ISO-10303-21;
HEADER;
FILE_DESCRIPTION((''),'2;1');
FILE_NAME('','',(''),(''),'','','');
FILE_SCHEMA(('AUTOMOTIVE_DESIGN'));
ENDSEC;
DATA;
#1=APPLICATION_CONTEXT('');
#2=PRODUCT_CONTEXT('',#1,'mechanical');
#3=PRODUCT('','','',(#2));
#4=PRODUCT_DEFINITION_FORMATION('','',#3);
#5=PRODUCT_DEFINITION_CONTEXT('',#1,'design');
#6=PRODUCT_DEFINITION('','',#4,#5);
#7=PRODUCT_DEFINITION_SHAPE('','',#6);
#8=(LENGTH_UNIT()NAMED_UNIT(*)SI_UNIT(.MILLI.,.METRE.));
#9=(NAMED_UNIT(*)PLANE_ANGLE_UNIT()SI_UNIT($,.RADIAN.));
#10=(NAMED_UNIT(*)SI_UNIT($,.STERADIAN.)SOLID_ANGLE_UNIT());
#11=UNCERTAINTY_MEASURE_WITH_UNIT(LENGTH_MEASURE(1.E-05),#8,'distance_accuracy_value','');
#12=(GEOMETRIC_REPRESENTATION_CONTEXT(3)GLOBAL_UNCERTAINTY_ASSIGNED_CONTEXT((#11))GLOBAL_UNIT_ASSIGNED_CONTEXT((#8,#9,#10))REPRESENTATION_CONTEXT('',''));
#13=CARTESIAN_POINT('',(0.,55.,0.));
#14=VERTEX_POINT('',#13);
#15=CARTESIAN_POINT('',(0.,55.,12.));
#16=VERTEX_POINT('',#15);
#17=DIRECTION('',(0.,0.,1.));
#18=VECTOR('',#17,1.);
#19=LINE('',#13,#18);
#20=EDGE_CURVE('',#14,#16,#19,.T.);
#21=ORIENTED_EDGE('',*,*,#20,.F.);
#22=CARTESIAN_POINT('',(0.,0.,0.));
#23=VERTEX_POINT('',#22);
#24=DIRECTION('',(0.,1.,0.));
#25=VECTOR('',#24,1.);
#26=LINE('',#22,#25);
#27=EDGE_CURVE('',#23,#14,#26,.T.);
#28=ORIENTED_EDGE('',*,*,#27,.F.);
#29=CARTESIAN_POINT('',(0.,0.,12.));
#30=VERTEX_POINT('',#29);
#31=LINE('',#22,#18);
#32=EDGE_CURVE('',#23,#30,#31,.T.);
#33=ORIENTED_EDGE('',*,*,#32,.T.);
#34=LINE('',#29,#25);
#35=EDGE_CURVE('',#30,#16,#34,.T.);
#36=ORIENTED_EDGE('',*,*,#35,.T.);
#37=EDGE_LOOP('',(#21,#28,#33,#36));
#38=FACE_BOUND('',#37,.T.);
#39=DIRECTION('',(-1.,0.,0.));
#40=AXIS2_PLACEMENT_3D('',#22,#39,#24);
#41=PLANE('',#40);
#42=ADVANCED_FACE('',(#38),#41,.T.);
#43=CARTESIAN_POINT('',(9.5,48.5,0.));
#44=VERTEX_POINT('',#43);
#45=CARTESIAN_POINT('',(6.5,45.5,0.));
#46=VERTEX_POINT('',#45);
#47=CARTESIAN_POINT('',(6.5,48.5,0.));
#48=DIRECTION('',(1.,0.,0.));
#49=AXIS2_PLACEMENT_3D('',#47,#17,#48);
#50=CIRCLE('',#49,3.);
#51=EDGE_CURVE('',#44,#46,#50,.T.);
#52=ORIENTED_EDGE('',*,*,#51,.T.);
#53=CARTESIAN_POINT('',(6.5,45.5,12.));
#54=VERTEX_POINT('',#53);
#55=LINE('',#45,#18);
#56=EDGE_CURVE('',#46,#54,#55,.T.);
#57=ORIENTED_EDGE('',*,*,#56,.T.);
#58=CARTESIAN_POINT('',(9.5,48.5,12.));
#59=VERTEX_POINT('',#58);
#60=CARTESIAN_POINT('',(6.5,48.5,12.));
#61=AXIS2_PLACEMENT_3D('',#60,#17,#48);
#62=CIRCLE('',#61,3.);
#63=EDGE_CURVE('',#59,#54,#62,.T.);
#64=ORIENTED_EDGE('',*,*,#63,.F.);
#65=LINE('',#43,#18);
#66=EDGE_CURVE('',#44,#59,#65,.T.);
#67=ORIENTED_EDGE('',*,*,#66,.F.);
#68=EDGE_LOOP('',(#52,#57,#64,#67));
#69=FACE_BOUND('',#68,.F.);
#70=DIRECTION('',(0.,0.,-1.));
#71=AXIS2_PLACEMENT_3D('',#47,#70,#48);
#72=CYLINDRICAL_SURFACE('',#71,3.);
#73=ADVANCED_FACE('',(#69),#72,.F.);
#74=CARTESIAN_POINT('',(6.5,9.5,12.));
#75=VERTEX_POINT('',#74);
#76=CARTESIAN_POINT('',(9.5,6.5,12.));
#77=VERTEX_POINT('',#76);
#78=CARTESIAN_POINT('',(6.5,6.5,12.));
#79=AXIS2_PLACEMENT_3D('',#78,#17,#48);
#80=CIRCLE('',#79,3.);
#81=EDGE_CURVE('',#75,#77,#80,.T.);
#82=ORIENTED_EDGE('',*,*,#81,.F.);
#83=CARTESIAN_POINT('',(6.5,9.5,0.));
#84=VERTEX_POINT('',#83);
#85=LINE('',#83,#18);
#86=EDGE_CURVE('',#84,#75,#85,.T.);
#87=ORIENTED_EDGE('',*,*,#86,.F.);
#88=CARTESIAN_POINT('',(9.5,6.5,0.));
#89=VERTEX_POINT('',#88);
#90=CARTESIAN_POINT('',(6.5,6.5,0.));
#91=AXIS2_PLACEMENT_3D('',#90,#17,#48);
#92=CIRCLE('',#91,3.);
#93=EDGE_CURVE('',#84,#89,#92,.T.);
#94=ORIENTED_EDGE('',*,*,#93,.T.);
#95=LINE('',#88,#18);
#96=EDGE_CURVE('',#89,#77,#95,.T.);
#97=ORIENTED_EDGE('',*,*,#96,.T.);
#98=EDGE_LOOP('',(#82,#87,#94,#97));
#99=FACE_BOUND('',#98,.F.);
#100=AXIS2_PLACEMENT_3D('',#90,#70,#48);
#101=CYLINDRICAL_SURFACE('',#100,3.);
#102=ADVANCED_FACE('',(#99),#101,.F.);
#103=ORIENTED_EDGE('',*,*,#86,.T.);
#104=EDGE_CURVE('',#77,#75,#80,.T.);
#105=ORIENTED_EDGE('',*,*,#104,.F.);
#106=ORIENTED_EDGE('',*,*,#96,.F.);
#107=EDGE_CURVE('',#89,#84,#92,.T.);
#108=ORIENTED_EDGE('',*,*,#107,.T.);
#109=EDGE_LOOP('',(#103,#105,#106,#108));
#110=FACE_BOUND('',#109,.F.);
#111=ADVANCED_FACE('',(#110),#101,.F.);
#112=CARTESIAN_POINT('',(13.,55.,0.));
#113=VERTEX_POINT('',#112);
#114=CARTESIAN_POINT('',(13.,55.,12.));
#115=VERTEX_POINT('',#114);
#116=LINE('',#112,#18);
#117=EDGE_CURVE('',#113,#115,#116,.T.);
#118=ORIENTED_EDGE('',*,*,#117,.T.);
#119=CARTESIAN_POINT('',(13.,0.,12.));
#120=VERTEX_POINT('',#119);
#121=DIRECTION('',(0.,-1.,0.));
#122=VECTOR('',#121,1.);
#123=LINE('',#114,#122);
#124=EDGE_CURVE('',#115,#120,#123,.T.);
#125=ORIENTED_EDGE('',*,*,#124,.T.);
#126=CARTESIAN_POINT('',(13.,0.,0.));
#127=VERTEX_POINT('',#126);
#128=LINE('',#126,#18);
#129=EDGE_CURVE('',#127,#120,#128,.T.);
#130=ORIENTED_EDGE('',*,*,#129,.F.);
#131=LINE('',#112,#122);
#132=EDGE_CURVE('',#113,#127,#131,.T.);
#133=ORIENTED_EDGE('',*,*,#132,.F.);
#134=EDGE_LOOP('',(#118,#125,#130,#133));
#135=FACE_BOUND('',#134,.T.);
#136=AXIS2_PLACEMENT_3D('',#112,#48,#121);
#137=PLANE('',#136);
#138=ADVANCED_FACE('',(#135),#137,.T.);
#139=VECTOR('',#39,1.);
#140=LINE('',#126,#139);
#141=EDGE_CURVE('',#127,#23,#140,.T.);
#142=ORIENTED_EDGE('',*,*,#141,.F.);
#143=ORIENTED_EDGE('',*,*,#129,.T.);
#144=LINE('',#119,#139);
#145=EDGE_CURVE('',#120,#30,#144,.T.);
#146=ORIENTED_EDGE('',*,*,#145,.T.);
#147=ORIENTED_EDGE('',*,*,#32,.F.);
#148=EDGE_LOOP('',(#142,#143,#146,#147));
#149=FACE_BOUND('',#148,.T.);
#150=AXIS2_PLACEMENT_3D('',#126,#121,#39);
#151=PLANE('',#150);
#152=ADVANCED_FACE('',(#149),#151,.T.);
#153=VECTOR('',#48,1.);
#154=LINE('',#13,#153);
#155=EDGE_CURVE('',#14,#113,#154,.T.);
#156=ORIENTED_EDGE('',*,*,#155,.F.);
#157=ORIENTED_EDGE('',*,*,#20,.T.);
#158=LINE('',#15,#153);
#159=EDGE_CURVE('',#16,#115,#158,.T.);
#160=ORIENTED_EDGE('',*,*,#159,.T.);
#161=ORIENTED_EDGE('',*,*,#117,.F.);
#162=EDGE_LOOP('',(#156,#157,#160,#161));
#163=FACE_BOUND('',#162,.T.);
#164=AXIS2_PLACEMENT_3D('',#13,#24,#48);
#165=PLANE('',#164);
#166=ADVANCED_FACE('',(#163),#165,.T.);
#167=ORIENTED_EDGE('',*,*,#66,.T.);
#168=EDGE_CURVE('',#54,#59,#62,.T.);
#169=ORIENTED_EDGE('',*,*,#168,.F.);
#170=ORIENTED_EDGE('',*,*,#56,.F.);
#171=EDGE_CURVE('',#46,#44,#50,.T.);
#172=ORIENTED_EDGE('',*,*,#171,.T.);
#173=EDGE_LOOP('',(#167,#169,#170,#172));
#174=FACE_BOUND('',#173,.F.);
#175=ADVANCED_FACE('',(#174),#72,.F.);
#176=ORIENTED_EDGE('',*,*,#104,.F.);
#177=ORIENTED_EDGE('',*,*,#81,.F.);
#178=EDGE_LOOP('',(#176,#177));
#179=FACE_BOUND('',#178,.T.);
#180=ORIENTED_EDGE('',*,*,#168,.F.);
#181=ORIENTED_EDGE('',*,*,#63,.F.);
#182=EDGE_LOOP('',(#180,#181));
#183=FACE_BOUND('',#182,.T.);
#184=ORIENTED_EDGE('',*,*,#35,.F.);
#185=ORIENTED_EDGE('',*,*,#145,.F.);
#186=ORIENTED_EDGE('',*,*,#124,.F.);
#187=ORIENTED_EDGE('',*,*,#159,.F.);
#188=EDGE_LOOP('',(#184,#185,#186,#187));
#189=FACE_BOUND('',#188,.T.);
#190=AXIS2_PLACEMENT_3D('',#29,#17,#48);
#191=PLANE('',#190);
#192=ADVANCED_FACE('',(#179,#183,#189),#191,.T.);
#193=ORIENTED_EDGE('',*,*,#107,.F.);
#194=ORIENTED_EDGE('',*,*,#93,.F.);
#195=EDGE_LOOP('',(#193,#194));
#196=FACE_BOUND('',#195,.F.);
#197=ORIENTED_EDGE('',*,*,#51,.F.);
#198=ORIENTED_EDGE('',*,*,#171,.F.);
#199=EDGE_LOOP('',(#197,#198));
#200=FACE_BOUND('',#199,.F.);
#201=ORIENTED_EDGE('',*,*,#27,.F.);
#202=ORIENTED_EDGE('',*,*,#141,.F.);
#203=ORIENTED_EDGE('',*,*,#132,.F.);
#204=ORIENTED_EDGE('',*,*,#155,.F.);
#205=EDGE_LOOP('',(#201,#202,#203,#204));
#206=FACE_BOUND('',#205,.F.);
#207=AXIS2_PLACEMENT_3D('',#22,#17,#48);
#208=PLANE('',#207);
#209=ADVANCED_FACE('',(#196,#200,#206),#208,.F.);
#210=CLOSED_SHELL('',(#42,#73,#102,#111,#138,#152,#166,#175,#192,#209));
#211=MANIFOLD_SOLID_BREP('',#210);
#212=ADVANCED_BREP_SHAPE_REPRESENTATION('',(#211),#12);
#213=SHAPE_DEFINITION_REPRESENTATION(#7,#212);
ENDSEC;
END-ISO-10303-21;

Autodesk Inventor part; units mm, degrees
ref_plane "YZ Plane" through (0, 0, 0) normal (1, 0, 0) x (0, 1, 0)
ref_plane "XZ Plane" through (0, 0, 0) normal (0, 1, 0) x (-1, 0, 0)
ref_plane "XY Plane" through (0, 0, 0) normal (0, 0, 1) x (1, 0, 0)
sketch "Sketch1" plane through (0, 0, 0) normal (0, 0, 1) x (1, 0, 0)
  line L0 (0, 55) -> (13, 55)
  line L1 (13, 55) -> (13, 0)
  line L2 (13, 0) -> (0, 0)
  line L3 (0, 0) -> (0, 55)
  circle A0 centre (6.5, 48.5) radius 3
  circle A1 centre (6.5, 6.5) radius 3
  line L4 (6.5, 48.5) -> (6.5, 6.5)
  dimension "d2" = 6
  dimension "d3" = 6
  dimension "d4" = 42
  dimension "d5" = 55
  dimension "d6" = 13
  dimension "d7" = 6.5
  dimension "d8" = 6.5
extrude "Extrusion1" add sketch "Sketch1" along normal blind 12
equation "\"d3\" = d2"
equation "\"d7\" = 0.5 * d6"
equation "\"d8\" = -0.5 * d4 + 0.5 * d5"
properties part number "plateplummer" material "PMMA Plastic"
